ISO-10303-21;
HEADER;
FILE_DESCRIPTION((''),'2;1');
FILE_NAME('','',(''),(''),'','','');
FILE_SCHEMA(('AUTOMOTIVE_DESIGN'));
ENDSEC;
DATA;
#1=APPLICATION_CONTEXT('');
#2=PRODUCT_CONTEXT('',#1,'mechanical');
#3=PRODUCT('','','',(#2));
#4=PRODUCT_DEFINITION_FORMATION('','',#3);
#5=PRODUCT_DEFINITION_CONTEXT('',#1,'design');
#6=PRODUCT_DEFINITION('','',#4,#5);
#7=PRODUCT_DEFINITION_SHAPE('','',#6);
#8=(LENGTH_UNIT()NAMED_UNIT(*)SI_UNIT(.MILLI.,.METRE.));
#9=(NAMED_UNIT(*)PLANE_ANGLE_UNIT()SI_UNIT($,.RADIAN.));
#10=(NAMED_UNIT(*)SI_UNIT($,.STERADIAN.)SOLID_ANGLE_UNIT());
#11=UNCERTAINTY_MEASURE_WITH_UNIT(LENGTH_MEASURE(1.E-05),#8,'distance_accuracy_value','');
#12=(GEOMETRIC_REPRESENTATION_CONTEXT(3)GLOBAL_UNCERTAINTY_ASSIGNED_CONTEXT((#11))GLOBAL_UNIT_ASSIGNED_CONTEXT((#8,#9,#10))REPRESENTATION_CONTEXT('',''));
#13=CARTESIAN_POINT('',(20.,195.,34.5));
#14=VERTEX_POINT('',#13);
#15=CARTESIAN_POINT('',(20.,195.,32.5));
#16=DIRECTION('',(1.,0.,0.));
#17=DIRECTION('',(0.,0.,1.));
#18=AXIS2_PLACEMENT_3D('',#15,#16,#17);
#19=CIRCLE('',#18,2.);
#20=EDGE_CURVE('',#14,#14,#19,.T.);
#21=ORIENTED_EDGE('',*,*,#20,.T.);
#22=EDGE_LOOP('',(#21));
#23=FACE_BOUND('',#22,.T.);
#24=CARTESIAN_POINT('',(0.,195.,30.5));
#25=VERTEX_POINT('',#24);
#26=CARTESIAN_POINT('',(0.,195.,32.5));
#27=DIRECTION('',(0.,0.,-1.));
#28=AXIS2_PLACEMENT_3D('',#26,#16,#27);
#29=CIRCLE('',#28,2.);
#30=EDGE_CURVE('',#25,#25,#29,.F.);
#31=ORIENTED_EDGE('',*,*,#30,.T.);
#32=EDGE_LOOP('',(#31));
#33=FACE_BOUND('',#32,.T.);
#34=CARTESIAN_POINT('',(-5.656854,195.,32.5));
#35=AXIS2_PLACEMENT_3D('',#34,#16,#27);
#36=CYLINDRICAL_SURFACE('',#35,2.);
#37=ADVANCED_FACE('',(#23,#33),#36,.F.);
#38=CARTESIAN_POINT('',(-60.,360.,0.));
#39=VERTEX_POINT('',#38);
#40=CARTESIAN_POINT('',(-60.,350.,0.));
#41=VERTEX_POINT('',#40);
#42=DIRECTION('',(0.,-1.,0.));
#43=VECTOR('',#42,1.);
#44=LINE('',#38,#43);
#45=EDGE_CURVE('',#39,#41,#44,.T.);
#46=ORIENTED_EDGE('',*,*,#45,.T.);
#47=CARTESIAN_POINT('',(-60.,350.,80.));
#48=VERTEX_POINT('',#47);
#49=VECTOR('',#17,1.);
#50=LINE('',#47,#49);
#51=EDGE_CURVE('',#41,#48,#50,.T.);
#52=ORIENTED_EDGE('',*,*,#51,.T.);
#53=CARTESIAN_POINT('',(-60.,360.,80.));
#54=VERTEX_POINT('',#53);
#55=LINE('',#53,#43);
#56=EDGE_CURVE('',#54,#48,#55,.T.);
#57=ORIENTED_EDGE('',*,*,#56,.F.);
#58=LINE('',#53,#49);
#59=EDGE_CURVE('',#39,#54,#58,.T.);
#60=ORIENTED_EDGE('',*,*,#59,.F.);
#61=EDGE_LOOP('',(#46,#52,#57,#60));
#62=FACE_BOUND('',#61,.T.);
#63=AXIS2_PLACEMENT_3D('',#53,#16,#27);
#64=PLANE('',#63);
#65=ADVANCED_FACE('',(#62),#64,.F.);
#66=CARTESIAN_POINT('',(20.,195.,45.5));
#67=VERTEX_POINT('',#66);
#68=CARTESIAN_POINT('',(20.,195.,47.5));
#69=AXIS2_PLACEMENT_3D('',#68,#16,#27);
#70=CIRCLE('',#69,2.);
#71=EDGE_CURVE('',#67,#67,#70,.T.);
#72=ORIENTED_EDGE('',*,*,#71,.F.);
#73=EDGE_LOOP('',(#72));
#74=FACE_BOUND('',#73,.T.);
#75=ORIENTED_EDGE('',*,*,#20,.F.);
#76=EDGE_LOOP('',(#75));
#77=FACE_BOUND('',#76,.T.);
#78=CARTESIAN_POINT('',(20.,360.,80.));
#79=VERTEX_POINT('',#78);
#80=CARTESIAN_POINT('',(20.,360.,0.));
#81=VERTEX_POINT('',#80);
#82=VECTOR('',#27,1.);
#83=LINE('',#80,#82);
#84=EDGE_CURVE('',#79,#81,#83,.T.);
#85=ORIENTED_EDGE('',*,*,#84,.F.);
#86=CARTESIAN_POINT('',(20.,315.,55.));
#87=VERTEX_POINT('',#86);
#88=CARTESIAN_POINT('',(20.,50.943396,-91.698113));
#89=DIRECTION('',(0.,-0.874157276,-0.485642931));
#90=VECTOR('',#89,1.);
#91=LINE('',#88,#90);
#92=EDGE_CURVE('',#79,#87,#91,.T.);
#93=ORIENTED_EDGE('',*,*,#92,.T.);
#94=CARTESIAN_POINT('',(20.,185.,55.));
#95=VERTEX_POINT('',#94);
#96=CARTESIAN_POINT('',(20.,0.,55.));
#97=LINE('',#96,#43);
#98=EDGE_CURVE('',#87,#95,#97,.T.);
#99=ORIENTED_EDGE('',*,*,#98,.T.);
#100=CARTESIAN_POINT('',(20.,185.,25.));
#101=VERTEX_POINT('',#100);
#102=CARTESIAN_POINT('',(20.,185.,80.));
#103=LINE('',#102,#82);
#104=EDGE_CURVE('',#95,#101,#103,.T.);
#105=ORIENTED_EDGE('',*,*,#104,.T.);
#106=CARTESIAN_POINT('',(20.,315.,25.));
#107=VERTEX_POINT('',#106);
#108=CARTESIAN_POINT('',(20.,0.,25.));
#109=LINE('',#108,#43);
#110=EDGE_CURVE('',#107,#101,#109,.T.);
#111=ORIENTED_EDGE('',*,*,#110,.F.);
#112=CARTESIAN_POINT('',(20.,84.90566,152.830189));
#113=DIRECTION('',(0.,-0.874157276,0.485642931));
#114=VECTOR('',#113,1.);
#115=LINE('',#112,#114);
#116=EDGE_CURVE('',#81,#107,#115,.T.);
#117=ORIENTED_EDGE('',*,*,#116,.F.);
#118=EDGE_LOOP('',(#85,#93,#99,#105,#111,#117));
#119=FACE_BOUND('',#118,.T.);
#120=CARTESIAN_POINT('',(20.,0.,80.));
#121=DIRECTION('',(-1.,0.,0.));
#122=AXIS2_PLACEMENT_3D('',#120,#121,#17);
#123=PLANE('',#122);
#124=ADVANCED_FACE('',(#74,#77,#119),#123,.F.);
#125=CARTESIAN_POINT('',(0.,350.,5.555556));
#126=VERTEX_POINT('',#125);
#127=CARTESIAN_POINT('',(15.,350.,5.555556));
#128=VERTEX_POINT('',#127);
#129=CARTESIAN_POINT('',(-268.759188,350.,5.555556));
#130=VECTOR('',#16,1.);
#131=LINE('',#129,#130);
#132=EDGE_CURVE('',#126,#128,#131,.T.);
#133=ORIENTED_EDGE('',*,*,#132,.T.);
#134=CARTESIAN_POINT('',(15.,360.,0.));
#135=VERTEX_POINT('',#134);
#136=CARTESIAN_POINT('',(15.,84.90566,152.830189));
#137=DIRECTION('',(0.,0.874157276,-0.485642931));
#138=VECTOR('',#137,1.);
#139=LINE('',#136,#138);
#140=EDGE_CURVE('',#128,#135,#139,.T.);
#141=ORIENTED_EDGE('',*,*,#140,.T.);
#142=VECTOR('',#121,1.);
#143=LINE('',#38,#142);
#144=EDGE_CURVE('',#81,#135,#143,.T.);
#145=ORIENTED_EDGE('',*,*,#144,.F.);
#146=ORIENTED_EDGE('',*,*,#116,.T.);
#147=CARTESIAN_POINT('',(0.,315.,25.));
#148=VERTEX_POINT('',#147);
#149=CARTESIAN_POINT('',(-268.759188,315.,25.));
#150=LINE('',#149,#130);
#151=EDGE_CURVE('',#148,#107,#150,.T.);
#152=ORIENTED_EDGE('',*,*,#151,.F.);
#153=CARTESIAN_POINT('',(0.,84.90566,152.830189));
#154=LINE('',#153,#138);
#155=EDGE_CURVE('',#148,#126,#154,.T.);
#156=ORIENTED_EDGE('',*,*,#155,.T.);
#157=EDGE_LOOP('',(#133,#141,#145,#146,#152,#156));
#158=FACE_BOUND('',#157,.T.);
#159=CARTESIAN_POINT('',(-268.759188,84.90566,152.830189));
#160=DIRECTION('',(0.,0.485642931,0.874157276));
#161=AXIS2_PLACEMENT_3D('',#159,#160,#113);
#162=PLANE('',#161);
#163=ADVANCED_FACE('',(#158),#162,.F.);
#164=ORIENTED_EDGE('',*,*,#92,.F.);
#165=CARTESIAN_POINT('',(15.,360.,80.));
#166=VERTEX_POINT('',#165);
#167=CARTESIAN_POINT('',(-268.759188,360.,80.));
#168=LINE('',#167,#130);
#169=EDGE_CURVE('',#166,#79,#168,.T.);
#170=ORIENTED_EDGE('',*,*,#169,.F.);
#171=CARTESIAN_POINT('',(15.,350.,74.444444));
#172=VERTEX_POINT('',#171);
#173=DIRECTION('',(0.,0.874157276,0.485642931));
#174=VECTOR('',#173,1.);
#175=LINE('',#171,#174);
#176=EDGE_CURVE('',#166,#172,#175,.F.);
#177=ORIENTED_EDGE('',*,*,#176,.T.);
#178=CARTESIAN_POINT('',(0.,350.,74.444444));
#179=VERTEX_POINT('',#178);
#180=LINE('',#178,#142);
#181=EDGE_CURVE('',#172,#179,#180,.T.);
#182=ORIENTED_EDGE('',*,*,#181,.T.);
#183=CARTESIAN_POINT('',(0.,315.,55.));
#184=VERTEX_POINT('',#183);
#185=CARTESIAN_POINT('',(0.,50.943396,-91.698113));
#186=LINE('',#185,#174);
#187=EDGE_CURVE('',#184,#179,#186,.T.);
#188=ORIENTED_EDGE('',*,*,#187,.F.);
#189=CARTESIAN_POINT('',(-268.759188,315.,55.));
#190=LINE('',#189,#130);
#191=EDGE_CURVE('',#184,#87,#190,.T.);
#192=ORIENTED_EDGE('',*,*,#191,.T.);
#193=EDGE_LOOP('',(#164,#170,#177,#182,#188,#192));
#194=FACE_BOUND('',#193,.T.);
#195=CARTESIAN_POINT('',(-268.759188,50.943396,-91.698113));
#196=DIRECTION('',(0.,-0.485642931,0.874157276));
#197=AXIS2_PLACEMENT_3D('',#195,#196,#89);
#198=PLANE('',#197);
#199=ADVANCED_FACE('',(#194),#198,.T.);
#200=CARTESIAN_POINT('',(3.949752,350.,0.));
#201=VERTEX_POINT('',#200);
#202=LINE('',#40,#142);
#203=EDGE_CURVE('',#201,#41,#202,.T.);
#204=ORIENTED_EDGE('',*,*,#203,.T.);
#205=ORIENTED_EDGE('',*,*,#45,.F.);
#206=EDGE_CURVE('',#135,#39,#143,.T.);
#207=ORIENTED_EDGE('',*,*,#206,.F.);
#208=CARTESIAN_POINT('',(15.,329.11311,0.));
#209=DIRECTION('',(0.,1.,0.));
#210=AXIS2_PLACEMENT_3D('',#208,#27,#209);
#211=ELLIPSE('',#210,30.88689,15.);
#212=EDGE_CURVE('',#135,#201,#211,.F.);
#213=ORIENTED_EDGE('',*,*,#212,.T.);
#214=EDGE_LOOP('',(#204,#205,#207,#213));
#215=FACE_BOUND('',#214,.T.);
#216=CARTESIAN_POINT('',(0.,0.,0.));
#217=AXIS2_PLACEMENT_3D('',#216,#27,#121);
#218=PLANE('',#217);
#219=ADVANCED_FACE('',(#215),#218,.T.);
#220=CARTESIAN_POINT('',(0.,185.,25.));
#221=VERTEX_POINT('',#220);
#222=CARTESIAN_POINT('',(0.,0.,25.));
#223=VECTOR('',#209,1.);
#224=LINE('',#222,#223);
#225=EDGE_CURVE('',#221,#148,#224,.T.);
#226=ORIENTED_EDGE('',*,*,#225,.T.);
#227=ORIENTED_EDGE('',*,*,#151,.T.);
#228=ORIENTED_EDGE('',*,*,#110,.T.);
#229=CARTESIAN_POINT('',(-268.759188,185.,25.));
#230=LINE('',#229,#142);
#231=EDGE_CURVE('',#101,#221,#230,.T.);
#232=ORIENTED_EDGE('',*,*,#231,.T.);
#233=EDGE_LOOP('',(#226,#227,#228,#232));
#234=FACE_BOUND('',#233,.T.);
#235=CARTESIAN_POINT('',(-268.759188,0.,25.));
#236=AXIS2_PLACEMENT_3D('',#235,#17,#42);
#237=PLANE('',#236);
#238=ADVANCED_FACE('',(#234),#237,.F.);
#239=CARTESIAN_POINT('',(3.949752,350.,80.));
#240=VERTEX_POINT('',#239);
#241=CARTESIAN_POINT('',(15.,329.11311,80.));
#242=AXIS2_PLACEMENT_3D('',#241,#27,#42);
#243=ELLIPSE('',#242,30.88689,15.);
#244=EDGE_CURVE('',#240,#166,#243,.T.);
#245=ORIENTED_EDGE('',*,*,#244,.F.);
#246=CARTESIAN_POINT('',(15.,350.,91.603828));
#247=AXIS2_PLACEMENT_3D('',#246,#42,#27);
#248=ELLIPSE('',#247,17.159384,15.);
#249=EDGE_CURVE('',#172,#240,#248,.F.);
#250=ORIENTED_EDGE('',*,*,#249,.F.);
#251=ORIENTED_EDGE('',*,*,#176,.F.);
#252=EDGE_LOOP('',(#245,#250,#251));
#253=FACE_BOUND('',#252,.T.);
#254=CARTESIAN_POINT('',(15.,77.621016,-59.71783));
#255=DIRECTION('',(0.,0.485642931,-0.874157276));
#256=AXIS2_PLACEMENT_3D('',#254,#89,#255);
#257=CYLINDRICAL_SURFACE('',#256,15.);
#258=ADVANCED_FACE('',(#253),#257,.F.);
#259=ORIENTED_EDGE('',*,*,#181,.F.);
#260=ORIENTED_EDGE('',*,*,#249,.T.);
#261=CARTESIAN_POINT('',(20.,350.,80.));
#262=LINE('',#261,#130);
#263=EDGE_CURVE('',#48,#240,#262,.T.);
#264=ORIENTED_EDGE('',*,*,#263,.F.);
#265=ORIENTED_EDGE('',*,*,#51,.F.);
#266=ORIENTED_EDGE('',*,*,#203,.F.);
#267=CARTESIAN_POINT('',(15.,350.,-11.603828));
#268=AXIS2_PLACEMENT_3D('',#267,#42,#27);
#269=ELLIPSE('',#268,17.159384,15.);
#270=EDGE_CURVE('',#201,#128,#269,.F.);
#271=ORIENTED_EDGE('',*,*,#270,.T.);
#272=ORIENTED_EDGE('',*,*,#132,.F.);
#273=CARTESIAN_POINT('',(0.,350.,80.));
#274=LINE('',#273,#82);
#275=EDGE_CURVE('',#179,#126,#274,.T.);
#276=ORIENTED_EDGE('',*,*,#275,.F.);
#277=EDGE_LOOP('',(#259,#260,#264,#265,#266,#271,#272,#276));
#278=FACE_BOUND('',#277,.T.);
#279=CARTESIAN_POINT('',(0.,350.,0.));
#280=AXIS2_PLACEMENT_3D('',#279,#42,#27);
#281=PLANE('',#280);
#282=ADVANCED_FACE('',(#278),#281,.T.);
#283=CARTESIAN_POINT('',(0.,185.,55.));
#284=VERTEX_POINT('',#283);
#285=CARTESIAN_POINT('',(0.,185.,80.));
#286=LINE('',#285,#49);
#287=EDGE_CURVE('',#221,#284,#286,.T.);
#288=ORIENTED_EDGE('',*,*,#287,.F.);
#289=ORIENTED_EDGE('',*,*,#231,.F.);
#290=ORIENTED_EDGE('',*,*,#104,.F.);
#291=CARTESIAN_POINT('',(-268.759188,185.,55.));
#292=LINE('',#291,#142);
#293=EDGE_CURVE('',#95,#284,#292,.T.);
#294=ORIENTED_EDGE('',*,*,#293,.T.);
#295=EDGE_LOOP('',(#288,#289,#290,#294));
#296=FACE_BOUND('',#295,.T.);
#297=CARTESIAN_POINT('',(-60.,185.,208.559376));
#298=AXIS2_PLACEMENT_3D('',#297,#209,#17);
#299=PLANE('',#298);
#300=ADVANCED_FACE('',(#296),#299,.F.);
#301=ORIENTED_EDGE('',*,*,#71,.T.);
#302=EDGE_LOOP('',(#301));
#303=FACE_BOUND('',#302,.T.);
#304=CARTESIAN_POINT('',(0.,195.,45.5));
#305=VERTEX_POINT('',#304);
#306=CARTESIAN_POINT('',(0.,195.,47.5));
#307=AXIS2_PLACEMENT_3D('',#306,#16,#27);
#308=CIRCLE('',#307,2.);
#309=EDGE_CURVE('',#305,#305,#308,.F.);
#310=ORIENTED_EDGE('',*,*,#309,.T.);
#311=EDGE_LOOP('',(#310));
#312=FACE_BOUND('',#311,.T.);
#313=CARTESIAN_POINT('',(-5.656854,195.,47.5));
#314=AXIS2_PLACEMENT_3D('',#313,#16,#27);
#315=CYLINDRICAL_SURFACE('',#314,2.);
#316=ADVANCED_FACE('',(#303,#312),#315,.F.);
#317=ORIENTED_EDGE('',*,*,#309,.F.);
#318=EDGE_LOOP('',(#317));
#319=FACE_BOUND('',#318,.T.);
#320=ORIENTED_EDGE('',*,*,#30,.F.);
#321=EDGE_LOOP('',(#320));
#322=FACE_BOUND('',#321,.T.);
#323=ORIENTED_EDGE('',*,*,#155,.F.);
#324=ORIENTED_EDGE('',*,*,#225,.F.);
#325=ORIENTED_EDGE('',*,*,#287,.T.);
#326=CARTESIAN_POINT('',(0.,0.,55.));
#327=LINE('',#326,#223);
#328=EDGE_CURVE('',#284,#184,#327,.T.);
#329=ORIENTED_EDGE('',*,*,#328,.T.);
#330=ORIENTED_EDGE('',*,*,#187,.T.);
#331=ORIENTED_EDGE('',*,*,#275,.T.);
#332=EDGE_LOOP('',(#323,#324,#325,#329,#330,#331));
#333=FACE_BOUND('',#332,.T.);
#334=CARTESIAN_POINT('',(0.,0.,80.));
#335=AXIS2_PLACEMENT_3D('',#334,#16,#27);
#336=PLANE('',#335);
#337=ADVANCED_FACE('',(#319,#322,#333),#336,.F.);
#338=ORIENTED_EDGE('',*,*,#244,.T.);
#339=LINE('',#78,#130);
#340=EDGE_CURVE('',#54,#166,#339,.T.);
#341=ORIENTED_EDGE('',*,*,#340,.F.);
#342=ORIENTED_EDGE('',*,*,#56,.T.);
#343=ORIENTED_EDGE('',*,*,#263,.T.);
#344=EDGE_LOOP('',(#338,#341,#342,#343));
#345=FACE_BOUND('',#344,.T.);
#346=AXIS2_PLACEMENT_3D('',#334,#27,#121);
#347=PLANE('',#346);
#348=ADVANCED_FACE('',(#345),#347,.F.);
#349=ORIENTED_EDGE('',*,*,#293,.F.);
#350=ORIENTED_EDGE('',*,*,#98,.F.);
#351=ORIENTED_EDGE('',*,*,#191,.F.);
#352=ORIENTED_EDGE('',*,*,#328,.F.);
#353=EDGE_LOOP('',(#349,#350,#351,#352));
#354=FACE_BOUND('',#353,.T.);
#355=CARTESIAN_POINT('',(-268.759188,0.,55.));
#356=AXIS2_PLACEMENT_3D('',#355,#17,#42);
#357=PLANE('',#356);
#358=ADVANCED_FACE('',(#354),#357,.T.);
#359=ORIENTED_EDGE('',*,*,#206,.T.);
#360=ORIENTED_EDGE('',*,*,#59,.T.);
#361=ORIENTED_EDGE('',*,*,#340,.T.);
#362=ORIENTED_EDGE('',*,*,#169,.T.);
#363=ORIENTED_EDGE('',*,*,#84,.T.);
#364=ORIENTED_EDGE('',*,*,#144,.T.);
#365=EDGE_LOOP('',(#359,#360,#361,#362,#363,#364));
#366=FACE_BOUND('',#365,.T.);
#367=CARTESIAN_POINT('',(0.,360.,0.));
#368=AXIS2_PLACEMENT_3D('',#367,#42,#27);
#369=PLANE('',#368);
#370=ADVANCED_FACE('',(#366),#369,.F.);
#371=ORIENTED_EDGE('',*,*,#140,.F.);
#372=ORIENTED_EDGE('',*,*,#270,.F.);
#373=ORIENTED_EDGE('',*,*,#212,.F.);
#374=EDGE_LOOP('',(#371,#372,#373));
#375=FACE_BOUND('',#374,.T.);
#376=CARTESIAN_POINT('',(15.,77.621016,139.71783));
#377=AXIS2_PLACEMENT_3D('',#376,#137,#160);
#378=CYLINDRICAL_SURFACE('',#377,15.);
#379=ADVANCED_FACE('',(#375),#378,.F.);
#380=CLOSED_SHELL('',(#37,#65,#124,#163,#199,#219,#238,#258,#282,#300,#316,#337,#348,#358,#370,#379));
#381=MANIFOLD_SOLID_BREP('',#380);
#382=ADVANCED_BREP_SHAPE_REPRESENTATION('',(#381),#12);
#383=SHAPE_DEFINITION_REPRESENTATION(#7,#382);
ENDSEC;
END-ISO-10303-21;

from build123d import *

# Parameters (mm, degrees)
SUPPORT_BALISE_W                           = 20
SUPPORT_BALISE_H                           = 350
SUPPORT_BALISE_BOSSAGE_DEPTH               = 80
ESQUISSE3_W                                = 80
ESQUISSE3_H                                = 80
SUPPORT_CHEVAL_ENLEVEMENT_DE_MATIERE_DEPTH = 10
ESQUISSE8_W                                = 10
ESQUISSE8_H                                = 70
SUPPORT_CHEVAL_DEPTH                       = 80
VIS_REACH                                  = 376.466
SERRAGE_VIS_R                              = 2.5
VIS_DIRECTION_2_DEPTH                      = 375.466286867
ENL_V_MAT_EXTRU_5_DEPTH                    = 20
POUR_IMPRESSION_R                          = 15
FIXATION_POUR_ASSEMBLAGE_R                 = 2
VIS_POUR_ASSEMBLAGE_DEPTH                  = 20
ENL_V_MAT_EXTRU_6_DEPTH                    = 378.359245282
ENL_V_MAT_EXTRU_6_DEPTH_BACK               = 378.359245282
PARTIE_HAUTE_W                             = 433.052929697
PARTIE_HAUTE_H                             = 227.316532038


with BuildPart() as part:
    # Support Balise → Support balise bossage (new body)
    with BuildSketch(Plane.XY):
        with Locations((10, 175)):
            Rectangle(SUPPORT_BALISE_W, SUPPORT_BALISE_H)
    extrude(amount=SUPPORT_BALISE_BOSSAGE_DEPTH)

    # Esquisse3 → Support Cheval enlevement de matiere (add)
    with BuildSketch(Plane(origin=(0, 350, 0), x_dir=(1, 0, 0), z_dir=(0, 1, 0))):
        with Locations((-20, -40)):
            Rectangle(ESQUISSE3_W, ESQUISSE3_H)
    extrude(amount=SUPPORT_CHEVAL_ENLEVEMENT_DE_MATIERE_DEPTH)

    # Esquisse8 → Support Cheval (cut)
    with BuildSketch(Plane.XY.offset(80)):
        with Locations((10, 35)):
            Rectangle(ESQUISSE8_W, ESQUISSE8_H)
    extrude(amount=-SUPPORT_CHEVAL_DEPTH, mode=Mode.SUBTRACT)

    # Vis: up to this face of the body (flat: up to its plane)
    vis_end = Plane(part.part.faces().sort_by_distance((0, 175, 40))[0])
    # Serrage vis → Vis (cut, up to the picked face)
    with BuildSketch(Plane(origin=(5, 0, 0), x_dir=(0, 0, -1), z_dir=(1, 0, 0)), mode=Mode.PRIVATE) as vis_sk1:
        with Locations((-70, 11.284552026)):
            Circle(SERRAGE_VIS_R)
    vis_tool1 = split(extrude(vis_sk1.sketch, amount=-VIS_REACH, mode=Mode.PRIVATE), bisect_by=vis_end, keep=Keep.BOTH, mode=Mode.PRIVATE)
    # Serrage vis → Vis (cut, up to the picked face)
    with BuildSketch(Plane(origin=(5, 0, 0), x_dir=(0, 0, -1), z_dir=(1, 0, 0)), mode=Mode.PRIVATE) as vis_sk2:
        with Locations((-70, 53.057184379)):
            Circle(SERRAGE_VIS_R)
    vis_tool2 = split(extrude(vis_sk2.sketch, amount=-VIS_REACH, mode=Mode.PRIVATE), bisect_by=vis_end, keep=Keep.BOTH, mode=Mode.PRIVATE)
    # Serrage vis → Vis (cut, up to the picked face)
    with BuildSketch(Plane(origin=(5, 0, 0), x_dir=(0, 0, -1), z_dir=(1, 0, 0)), mode=Mode.PRIVATE) as vis_sk3:
        with Locations((-10, 53.057184379)):
            Circle(SERRAGE_VIS_R)
    vis_tool3 = split(extrude(vis_sk3.sketch, amount=-VIS_REACH, mode=Mode.PRIVATE), bisect_by=vis_end, keep=Keep.BOTH, mode=Mode.PRIVATE)
    # Serrage vis → Vis (cut, up to the picked face)
    with BuildSketch(Plane(origin=(5, 0, 0), x_dir=(0, 0, -1), z_dir=(1, 0, 0)), mode=Mode.PRIVATE) as vis_sk4:
        with Locations((-10, 11.284552026)):
            Circle(SERRAGE_VIS_R)
    vis_tool4 = split(extrude(vis_sk4.sketch, amount=-VIS_REACH, mode=Mode.PRIVATE), bisect_by=vis_end, keep=Keep.BOTH, mode=Mode.PRIVATE)
    # Serrage vis → Vis (cut, up to the picked face)
    with BuildSketch(Plane(origin=(5, 0, 0), x_dir=(0, 0, -1), z_dir=(1, 0, 0)), mode=Mode.PRIVATE) as vis_sk5:
        with Locations((-40, 32.170868202)):
            Circle(SERRAGE_VIS_R)
    vis_tool5 = split(extrude(vis_sk5.sketch, amount=-VIS_REACH, mode=Mode.PRIVATE), bisect_by=vis_end, keep=Keep.BOTH, mode=Mode.PRIVATE)
    add(vis_tool1.solids().sort_by(Axis((5, 11.284552, 70), (-1, 0, 0)))[0], mode=Mode.SUBTRACT)
    add(vis_tool2.solids().sort_by(Axis((5, 53.057184, 70), (-1, 0, 0)))[0], mode=Mode.SUBTRACT)
    add(vis_tool3.solids().sort_by(Axis((5, 53.057184, 10), (-1, 0, 0)))[0], mode=Mode.SUBTRACT)
    add(vis_tool4.solids().sort_by(Axis((5, 11.284552, 10), (-1, 0, 0)))[0], mode=Mode.SUBTRACT)
    add(vis_tool5.solids().sort_by(Axis((5, 32.170868, 40), (-1, 0, 0)))[0], mode=Mode.SUBTRACT)

    # Serrage vis → Vis direction 2 (cut)
    with BuildSketch(Plane(origin=(5, 0, 0), x_dir=(0, 0, -1), z_dir=(1, 0, 0))):
        with Locations((-70, 11.284552026)):
            Circle(SERRAGE_VIS_R)
        with Locations((-70, 53.057184379)):
            Circle(SERRAGE_VIS_R)
        with Locations((-10, 53.057184379)):
            Circle(SERRAGE_VIS_R)
        with Locations((-10, 11.284552026)):
            Circle(SERRAGE_VIS_R)
        with Locations((-40, 32.170868202)):
            Circle(SERRAGE_VIS_R)
    extrude(amount=VIS_DIRECTION_2_DEPTH, mode=Mode.SUBTRACT)

    # Design → Enlèv. mat.-Extru.5 (cut)
    with BuildSketch(Plane(origin=(20, 0, 0), x_dir=(0, 0, -1), z_dir=(1, 0, 0))):
        Polygon((-55, 315), (-80, 360), (-80, 92.406088827), (-55, 137.406088827), align=None)
        Polygon((0, 92.406088827), (0, 360), (-25, 315), (-25, 137.406088827), align=None)
    extrude(amount=-ENL_V_MAT_EXTRU_5_DEPTH, mode=Mode.SUBTRACT)

    # Pour Impression
    # the kernel refuses this fillet: 15 mm, written as the material it adds along each edge
    with BuildSketch(Plane(origin=(0, 392.780897855, -18.211609919), x_dir=(1, 0, 0), z_dir=(0, -0.8741572761215375, 0.48564293117863266))) as pour_impression_piece_1_section:
        with BuildLine():
            CenterArc((POUR_IMPRESSION_R, -POUR_IMPRESSION_R), POUR_IMPRESSION_R, 90, 90)
            Line((0, -POUR_IMPRESSION_R), (0, 0))
            Line((0, 0), (POUR_IMPRESSION_R, 0))
        make_face()
    pour_impression_piece_1 = extrude(amount=86.439589046, mode=Mode.PRIVATE)
    pour_impression_piece_1 = split(pour_impression_piece_1, bisect_by=Plane(origin=(4.741525676, 350, 2.029382941), z_dir=(0, 1, 0)), keep=Keep.TOP, mode=Mode.PRIVATE)
    pour_impression_piece_1 = split(pour_impression_piece_1, bisect_by=Plane(origin=(4.741525676, 353.652889294, 0), z_dir=(0, 0, 1)), keep=Keep.TOP, mode=Mode.PRIVATE)
    add(pour_impression_piece_1)
    with BuildSketch(Plane(origin=(0, 317.219102145, 56.232834525), x_dir=(1, 0, 0), z_dir=(0, 0.8741572761215377, 0.4856429311786322))) as pour_impression_piece_2_section:
        with BuildLine():
            CenterArc((POUR_IMPRESSION_R, -POUR_IMPRESSION_R), POUR_IMPRESSION_R, 90, 90)
            Line((0, -POUR_IMPRESSION_R), (0, 0))
            Line((0, 0), (POUR_IMPRESSION_R, 0))
        make_face()
    pour_impression_piece_2 = extrude(amount=86.439589046, mode=Mode.PRIVATE)
    pour_impression_piece_2 = split(pour_impression_piece_2, bisect_by=Plane(origin=(4.741525676, 350, 77.970617059), z_dir=(0, 1, 0)), keep=Keep.TOP, mode=Mode.PRIVATE)
    pour_impression_piece_2 = split(pour_impression_piece_2, bisect_by=Plane(origin=(4.741525676, 353.652889294, 80), z_dir=(0, 0, -1)), keep=Keep.TOP, mode=Mode.PRIVATE)
    add(pour_impression_piece_2)

    # Fixation pour assemblage → Vis pour Assemblage (cut)
    with BuildSketch(Plane(origin=(20, 0, 0), x_dir=(0, 0, -1), z_dir=(1, 0, 0))):
        with Locations((-47.5, 195)):
            Circle(FIXATION_POUR_ASSEMBLAGE_R)
        with Locations((-32.5, 195)):
            Circle(FIXATION_POUR_ASSEMBLAGE_R)
        with Locations((-32.5, 175)):
            Circle(FIXATION_POUR_ASSEMBLAGE_R)
        with Locations((-47.5, 175)):
            Circle(FIXATION_POUR_ASSEMBLAGE_R)
    extrude(amount=-VIS_POUR_ASSEMBLAGE_DEPTH, mode=Mode.SUBTRACT)

    # Partie_Haute → Enlèv. mat.-Extru.6 (cut, two sides: drawn at the far end of the back side and taken through both)
    with BuildSketch(Plane(origin=(20, 0, 0), x_dir=(0, 0, -1), z_dir=(1, 0, 0)).offset(-ENL_V_MAT_EXTRU_6_DEPTH_BACK)):
        with Locations((7.967088797, 71.341733981)):
            Rectangle(PARTIE_HAUTE_W, PARTIE_HAUTE_H)
    extrude(amount=ENL_V_MAT_EXTRU_6_DEPTH + ENL_V_MAT_EXTRU_6_DEPTH_BACK, mode=Mode.SUBTRACT)


solid = part.part
